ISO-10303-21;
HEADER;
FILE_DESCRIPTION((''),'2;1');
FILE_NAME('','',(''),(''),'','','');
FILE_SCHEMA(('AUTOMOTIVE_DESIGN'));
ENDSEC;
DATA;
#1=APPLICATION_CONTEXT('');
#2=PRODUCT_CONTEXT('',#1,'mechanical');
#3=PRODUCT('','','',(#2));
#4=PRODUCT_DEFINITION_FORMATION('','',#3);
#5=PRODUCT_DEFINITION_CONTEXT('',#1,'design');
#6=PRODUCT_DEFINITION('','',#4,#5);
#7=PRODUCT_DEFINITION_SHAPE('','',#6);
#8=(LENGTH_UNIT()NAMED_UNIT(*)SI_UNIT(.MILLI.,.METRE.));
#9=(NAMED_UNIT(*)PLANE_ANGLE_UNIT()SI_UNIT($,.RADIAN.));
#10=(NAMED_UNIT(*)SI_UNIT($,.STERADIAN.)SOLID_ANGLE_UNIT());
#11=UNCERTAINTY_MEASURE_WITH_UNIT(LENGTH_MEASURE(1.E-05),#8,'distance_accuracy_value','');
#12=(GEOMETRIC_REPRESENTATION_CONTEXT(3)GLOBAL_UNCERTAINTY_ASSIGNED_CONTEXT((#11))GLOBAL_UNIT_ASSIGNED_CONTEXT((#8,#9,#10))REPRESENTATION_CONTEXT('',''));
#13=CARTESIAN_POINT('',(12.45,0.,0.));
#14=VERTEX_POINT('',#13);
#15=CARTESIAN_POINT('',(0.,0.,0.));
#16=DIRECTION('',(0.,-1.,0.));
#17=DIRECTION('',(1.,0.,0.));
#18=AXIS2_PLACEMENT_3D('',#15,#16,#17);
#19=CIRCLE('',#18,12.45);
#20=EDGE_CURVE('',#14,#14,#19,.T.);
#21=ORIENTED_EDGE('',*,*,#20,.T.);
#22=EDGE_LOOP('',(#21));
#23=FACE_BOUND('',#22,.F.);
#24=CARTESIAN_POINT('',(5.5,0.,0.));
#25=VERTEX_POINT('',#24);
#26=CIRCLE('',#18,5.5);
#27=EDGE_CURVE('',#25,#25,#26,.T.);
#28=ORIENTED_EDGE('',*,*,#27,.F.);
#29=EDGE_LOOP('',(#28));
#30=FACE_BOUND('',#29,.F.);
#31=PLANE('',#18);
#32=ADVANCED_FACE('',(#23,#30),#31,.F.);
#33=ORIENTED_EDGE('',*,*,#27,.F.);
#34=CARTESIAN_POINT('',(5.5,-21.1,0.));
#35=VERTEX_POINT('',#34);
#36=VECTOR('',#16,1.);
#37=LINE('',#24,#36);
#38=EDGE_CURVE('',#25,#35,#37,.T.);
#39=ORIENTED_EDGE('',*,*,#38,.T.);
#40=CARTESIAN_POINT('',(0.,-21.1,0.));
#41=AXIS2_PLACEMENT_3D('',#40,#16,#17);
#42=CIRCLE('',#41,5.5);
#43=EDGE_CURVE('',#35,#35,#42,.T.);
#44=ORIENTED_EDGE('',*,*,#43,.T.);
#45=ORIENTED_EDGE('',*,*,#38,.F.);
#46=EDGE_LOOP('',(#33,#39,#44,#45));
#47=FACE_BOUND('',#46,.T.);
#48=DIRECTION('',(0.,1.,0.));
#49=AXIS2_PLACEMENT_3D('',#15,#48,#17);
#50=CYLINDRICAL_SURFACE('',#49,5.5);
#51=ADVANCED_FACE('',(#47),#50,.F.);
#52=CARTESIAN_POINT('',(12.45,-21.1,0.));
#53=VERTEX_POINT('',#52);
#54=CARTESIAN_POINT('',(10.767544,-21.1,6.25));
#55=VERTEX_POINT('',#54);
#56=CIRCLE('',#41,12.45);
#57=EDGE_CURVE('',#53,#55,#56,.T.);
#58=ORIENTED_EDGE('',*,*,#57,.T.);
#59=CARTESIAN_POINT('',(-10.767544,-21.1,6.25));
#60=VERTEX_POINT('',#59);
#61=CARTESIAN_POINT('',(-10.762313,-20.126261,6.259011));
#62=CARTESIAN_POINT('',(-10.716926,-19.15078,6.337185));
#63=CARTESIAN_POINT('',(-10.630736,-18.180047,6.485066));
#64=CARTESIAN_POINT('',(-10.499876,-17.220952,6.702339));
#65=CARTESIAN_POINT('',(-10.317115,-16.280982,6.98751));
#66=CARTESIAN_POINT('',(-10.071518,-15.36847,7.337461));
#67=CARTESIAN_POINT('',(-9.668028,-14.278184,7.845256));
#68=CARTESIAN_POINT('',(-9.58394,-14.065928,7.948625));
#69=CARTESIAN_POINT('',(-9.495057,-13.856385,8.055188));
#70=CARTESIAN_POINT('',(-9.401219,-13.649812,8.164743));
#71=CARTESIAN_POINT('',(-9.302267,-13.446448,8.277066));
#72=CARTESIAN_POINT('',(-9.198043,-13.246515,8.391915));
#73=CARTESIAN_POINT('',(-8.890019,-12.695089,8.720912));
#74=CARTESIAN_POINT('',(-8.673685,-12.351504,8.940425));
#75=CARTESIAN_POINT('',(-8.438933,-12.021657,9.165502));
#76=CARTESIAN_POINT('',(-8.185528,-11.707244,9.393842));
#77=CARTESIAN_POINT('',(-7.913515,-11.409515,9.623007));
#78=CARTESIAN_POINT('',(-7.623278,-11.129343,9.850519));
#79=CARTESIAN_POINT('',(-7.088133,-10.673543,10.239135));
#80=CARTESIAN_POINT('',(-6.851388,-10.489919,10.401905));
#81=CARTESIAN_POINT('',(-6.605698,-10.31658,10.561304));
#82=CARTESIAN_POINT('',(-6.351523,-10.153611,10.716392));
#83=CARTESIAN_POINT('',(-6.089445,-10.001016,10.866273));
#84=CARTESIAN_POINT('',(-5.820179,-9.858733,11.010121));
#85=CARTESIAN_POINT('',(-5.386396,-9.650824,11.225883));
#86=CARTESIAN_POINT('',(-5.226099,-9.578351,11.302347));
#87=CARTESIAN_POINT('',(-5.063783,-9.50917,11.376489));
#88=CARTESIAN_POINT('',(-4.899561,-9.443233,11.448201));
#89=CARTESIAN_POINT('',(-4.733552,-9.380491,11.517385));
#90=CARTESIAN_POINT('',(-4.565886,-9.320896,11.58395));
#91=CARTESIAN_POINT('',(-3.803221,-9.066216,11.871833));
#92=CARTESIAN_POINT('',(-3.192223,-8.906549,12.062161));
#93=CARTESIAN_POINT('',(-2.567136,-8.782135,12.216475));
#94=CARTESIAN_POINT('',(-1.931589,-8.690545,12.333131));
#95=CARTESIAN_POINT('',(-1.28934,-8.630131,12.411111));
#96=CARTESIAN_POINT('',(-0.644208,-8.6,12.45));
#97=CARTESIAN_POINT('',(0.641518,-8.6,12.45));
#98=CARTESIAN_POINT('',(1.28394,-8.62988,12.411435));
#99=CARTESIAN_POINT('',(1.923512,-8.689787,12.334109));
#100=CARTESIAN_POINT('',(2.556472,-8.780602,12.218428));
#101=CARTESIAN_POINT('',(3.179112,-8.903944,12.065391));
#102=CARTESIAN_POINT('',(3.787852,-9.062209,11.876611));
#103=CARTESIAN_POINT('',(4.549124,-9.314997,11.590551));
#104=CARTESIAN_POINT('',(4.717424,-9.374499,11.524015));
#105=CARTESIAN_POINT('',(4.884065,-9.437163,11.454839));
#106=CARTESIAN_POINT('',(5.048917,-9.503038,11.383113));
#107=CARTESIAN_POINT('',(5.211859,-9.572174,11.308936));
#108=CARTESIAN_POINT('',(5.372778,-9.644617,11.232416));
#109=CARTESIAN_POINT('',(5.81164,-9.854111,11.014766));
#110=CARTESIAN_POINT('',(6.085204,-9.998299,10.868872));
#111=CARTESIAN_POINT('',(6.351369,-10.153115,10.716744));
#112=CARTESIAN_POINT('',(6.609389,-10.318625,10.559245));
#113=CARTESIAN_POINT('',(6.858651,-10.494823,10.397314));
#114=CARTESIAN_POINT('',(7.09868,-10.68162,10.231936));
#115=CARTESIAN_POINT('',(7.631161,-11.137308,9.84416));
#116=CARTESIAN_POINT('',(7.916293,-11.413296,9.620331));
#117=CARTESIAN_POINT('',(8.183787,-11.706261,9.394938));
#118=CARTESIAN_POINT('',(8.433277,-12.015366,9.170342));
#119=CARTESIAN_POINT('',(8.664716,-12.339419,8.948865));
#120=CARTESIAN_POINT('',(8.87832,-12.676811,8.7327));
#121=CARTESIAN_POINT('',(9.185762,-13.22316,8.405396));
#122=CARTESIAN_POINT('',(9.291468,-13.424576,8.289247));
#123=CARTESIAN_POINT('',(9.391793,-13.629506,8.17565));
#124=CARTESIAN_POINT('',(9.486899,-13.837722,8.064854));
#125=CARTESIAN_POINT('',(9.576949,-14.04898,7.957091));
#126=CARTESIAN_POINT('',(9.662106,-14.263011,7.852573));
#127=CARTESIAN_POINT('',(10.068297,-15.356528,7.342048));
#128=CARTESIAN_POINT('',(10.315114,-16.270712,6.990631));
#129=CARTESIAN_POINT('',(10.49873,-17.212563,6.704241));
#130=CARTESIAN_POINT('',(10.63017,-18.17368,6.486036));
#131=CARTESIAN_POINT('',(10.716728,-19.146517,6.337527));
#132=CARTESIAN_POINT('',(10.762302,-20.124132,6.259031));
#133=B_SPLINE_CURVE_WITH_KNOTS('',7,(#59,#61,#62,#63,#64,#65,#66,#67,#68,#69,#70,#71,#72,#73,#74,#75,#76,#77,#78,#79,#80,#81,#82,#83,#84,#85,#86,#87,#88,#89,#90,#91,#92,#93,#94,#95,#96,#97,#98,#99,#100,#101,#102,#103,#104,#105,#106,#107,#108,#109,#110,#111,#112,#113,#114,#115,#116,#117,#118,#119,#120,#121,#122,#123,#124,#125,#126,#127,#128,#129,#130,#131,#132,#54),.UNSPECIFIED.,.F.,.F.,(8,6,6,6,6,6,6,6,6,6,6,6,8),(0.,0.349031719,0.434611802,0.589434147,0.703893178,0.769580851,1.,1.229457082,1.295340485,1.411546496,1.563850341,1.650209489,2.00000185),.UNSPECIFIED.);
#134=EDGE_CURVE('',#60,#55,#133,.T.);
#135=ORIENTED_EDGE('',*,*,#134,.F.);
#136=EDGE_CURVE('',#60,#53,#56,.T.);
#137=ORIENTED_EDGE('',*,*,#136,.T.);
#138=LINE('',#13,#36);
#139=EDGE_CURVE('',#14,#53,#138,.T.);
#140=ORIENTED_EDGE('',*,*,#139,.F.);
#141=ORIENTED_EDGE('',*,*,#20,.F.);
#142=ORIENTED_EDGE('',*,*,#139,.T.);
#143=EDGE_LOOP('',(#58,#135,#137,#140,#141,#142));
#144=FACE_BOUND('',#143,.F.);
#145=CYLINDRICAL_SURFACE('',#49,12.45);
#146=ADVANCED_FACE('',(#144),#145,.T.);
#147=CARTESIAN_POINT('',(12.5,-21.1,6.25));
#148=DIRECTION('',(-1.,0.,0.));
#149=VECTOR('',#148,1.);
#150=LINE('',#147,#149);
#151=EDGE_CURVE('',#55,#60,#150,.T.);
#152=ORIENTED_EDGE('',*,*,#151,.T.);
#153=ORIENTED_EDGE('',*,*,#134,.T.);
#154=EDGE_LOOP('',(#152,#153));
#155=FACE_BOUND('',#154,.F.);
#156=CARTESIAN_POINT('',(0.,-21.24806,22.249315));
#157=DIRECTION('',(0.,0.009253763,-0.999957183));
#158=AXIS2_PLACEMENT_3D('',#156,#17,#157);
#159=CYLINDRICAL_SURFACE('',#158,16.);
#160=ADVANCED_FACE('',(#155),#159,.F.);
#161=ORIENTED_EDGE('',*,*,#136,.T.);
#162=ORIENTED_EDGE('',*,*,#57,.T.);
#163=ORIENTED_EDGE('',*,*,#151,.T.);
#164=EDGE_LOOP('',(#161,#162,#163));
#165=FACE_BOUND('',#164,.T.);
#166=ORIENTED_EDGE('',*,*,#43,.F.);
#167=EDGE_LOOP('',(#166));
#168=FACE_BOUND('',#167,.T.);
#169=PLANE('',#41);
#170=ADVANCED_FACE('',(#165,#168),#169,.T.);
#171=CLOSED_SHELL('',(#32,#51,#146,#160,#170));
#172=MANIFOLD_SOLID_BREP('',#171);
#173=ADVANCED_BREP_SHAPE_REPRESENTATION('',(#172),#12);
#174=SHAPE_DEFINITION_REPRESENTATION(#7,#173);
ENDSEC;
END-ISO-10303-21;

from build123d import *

# Parameters (mm, degrees)
F0_R     = 12.45
F0_R_2   = 5.5
F1_DEPTH = 21.1
F3_DEPTH = 12.5


with BuildPart() as f1:
    # F0 (on Front) → F1 (new body)
    with BuildSketch(Plane.XZ):
        Circle(F0_R)
        Circle(F0_R_2, mode=Mode.SUBTRACT)
    extrude(amount=F1_DEPTH)

    # F2 (on Right) → F3 (cut, symmetric)
    with BuildSketch(Plane.YZ):
        with BuildLine():
            Line((-8.6, 12.45), (-21.1, 12.45))
            Line((-21.1, 12.45), (-21.1, 6.25))
            ThreePointArc((-21.1, 6.25), (-14.1385472549, 7.9156194655), (-8.6, 12.45))
        make_face()
    extrude(amount=F3_DEPTH, both=True, mode=Mode.SUBTRACT)


solid = f1.part
